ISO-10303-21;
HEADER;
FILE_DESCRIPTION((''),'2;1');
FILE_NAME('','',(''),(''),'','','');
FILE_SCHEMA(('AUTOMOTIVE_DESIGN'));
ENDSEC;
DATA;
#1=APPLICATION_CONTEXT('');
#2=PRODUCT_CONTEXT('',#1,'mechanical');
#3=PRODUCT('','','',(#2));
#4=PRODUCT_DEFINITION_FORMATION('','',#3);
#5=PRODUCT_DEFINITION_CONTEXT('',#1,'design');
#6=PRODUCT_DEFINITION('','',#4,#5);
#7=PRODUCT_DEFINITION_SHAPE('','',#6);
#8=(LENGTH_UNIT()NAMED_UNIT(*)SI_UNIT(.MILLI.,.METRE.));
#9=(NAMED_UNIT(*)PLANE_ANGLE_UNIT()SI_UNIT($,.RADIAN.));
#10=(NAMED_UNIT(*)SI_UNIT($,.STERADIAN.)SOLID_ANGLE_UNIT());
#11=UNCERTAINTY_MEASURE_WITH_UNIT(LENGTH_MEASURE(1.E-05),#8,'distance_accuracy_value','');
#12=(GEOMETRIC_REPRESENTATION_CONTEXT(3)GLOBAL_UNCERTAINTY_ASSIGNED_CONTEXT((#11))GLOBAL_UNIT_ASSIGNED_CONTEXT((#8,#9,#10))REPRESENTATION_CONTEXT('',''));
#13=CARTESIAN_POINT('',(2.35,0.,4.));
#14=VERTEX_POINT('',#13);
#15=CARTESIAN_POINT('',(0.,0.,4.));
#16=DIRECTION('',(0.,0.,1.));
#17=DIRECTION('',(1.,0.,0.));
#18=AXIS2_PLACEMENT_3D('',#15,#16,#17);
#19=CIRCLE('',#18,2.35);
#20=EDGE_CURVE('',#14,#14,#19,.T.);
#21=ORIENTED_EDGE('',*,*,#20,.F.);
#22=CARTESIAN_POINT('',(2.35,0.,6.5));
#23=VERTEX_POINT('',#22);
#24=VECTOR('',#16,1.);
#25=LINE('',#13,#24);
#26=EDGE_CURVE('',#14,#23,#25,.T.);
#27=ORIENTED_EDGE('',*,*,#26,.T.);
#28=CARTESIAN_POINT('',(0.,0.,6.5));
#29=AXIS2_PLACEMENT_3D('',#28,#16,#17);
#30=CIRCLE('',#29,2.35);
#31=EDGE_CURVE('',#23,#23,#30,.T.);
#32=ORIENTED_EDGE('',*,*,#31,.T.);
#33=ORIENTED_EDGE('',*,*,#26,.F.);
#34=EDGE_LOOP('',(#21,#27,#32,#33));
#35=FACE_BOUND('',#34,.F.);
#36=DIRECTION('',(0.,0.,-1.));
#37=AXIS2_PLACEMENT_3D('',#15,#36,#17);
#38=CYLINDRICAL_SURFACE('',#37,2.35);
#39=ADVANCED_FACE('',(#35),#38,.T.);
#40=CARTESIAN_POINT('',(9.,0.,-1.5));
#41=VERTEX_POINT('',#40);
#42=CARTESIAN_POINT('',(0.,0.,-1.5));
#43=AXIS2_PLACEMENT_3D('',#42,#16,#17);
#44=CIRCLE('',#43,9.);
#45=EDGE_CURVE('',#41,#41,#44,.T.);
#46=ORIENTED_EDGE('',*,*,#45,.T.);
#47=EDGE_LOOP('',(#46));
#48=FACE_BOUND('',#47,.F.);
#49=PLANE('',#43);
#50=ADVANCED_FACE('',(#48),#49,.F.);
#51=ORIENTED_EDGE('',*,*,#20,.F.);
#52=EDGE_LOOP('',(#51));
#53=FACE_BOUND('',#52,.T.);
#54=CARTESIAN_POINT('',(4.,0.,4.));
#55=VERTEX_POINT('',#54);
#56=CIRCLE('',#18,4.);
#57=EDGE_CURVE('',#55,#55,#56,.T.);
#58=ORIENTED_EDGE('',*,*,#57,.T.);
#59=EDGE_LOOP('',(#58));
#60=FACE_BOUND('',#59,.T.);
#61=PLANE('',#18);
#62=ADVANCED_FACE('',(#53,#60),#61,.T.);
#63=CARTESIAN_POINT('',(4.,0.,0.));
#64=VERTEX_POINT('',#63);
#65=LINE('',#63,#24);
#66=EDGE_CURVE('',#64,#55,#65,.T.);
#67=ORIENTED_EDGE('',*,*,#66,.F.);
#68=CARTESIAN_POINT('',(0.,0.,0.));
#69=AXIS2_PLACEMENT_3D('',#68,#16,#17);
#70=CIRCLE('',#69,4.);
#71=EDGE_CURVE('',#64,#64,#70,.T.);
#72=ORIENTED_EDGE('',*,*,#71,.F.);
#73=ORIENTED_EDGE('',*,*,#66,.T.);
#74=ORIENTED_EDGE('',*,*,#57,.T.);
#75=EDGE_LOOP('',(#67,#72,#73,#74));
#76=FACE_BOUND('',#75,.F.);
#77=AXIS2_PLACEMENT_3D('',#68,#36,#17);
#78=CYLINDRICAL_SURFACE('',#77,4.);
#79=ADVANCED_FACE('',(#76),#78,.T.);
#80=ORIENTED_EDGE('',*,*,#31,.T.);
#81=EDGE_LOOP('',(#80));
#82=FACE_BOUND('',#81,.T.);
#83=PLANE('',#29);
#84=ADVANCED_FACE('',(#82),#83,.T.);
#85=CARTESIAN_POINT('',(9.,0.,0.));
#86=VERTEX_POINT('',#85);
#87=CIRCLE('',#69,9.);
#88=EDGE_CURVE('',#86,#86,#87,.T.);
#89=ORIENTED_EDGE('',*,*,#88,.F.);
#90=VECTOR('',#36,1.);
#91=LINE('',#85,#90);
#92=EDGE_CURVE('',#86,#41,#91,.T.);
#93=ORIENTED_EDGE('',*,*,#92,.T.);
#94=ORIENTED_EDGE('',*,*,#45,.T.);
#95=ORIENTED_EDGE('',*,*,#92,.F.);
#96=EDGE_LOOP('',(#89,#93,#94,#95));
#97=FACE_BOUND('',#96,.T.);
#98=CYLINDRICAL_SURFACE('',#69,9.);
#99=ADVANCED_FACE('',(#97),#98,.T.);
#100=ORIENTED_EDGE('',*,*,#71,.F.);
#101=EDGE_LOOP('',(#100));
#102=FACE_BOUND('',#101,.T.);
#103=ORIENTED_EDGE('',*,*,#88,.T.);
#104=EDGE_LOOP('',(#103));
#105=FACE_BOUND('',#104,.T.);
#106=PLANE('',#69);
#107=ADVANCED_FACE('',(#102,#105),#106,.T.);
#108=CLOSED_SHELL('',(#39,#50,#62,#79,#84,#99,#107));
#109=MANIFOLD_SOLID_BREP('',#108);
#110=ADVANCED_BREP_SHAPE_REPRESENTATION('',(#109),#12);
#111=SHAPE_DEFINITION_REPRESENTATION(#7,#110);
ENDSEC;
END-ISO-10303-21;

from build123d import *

# Parameters (mm, degrees)
F0_R     = 9
F0_R_2   = 4
F1_DEPTH = 1.5
F2_DEPTH = 4
F3_R     = 2.35
F4_DEPTH = 2.5


# Not quite as in the source:
# - a feature names something its author has since deleted; it is built from what else it names


with BuildPart() as f1:
    # F0 (on Top) → F1 (new body)
    with BuildSketch(Plane.XY):
        Circle(F0_R)
        Circle(F0_R_2, mode=Mode.SUBTRACT)
        Circle(F0_R_2)
    extrude(amount=-F1_DEPTH)

    # F0 (on Top) → F2 (join)
    with BuildSketch(Plane.XY):
        Circle(F0_R_2)
    extrude(amount=F2_DEPTH)

    # F3 (on face) → F4 (join)
    with BuildSketch(Plane.XY.offset(4)):
        Circle(F3_R)
    extrude(amount=F4_DEPTH)


solid = f1.part
